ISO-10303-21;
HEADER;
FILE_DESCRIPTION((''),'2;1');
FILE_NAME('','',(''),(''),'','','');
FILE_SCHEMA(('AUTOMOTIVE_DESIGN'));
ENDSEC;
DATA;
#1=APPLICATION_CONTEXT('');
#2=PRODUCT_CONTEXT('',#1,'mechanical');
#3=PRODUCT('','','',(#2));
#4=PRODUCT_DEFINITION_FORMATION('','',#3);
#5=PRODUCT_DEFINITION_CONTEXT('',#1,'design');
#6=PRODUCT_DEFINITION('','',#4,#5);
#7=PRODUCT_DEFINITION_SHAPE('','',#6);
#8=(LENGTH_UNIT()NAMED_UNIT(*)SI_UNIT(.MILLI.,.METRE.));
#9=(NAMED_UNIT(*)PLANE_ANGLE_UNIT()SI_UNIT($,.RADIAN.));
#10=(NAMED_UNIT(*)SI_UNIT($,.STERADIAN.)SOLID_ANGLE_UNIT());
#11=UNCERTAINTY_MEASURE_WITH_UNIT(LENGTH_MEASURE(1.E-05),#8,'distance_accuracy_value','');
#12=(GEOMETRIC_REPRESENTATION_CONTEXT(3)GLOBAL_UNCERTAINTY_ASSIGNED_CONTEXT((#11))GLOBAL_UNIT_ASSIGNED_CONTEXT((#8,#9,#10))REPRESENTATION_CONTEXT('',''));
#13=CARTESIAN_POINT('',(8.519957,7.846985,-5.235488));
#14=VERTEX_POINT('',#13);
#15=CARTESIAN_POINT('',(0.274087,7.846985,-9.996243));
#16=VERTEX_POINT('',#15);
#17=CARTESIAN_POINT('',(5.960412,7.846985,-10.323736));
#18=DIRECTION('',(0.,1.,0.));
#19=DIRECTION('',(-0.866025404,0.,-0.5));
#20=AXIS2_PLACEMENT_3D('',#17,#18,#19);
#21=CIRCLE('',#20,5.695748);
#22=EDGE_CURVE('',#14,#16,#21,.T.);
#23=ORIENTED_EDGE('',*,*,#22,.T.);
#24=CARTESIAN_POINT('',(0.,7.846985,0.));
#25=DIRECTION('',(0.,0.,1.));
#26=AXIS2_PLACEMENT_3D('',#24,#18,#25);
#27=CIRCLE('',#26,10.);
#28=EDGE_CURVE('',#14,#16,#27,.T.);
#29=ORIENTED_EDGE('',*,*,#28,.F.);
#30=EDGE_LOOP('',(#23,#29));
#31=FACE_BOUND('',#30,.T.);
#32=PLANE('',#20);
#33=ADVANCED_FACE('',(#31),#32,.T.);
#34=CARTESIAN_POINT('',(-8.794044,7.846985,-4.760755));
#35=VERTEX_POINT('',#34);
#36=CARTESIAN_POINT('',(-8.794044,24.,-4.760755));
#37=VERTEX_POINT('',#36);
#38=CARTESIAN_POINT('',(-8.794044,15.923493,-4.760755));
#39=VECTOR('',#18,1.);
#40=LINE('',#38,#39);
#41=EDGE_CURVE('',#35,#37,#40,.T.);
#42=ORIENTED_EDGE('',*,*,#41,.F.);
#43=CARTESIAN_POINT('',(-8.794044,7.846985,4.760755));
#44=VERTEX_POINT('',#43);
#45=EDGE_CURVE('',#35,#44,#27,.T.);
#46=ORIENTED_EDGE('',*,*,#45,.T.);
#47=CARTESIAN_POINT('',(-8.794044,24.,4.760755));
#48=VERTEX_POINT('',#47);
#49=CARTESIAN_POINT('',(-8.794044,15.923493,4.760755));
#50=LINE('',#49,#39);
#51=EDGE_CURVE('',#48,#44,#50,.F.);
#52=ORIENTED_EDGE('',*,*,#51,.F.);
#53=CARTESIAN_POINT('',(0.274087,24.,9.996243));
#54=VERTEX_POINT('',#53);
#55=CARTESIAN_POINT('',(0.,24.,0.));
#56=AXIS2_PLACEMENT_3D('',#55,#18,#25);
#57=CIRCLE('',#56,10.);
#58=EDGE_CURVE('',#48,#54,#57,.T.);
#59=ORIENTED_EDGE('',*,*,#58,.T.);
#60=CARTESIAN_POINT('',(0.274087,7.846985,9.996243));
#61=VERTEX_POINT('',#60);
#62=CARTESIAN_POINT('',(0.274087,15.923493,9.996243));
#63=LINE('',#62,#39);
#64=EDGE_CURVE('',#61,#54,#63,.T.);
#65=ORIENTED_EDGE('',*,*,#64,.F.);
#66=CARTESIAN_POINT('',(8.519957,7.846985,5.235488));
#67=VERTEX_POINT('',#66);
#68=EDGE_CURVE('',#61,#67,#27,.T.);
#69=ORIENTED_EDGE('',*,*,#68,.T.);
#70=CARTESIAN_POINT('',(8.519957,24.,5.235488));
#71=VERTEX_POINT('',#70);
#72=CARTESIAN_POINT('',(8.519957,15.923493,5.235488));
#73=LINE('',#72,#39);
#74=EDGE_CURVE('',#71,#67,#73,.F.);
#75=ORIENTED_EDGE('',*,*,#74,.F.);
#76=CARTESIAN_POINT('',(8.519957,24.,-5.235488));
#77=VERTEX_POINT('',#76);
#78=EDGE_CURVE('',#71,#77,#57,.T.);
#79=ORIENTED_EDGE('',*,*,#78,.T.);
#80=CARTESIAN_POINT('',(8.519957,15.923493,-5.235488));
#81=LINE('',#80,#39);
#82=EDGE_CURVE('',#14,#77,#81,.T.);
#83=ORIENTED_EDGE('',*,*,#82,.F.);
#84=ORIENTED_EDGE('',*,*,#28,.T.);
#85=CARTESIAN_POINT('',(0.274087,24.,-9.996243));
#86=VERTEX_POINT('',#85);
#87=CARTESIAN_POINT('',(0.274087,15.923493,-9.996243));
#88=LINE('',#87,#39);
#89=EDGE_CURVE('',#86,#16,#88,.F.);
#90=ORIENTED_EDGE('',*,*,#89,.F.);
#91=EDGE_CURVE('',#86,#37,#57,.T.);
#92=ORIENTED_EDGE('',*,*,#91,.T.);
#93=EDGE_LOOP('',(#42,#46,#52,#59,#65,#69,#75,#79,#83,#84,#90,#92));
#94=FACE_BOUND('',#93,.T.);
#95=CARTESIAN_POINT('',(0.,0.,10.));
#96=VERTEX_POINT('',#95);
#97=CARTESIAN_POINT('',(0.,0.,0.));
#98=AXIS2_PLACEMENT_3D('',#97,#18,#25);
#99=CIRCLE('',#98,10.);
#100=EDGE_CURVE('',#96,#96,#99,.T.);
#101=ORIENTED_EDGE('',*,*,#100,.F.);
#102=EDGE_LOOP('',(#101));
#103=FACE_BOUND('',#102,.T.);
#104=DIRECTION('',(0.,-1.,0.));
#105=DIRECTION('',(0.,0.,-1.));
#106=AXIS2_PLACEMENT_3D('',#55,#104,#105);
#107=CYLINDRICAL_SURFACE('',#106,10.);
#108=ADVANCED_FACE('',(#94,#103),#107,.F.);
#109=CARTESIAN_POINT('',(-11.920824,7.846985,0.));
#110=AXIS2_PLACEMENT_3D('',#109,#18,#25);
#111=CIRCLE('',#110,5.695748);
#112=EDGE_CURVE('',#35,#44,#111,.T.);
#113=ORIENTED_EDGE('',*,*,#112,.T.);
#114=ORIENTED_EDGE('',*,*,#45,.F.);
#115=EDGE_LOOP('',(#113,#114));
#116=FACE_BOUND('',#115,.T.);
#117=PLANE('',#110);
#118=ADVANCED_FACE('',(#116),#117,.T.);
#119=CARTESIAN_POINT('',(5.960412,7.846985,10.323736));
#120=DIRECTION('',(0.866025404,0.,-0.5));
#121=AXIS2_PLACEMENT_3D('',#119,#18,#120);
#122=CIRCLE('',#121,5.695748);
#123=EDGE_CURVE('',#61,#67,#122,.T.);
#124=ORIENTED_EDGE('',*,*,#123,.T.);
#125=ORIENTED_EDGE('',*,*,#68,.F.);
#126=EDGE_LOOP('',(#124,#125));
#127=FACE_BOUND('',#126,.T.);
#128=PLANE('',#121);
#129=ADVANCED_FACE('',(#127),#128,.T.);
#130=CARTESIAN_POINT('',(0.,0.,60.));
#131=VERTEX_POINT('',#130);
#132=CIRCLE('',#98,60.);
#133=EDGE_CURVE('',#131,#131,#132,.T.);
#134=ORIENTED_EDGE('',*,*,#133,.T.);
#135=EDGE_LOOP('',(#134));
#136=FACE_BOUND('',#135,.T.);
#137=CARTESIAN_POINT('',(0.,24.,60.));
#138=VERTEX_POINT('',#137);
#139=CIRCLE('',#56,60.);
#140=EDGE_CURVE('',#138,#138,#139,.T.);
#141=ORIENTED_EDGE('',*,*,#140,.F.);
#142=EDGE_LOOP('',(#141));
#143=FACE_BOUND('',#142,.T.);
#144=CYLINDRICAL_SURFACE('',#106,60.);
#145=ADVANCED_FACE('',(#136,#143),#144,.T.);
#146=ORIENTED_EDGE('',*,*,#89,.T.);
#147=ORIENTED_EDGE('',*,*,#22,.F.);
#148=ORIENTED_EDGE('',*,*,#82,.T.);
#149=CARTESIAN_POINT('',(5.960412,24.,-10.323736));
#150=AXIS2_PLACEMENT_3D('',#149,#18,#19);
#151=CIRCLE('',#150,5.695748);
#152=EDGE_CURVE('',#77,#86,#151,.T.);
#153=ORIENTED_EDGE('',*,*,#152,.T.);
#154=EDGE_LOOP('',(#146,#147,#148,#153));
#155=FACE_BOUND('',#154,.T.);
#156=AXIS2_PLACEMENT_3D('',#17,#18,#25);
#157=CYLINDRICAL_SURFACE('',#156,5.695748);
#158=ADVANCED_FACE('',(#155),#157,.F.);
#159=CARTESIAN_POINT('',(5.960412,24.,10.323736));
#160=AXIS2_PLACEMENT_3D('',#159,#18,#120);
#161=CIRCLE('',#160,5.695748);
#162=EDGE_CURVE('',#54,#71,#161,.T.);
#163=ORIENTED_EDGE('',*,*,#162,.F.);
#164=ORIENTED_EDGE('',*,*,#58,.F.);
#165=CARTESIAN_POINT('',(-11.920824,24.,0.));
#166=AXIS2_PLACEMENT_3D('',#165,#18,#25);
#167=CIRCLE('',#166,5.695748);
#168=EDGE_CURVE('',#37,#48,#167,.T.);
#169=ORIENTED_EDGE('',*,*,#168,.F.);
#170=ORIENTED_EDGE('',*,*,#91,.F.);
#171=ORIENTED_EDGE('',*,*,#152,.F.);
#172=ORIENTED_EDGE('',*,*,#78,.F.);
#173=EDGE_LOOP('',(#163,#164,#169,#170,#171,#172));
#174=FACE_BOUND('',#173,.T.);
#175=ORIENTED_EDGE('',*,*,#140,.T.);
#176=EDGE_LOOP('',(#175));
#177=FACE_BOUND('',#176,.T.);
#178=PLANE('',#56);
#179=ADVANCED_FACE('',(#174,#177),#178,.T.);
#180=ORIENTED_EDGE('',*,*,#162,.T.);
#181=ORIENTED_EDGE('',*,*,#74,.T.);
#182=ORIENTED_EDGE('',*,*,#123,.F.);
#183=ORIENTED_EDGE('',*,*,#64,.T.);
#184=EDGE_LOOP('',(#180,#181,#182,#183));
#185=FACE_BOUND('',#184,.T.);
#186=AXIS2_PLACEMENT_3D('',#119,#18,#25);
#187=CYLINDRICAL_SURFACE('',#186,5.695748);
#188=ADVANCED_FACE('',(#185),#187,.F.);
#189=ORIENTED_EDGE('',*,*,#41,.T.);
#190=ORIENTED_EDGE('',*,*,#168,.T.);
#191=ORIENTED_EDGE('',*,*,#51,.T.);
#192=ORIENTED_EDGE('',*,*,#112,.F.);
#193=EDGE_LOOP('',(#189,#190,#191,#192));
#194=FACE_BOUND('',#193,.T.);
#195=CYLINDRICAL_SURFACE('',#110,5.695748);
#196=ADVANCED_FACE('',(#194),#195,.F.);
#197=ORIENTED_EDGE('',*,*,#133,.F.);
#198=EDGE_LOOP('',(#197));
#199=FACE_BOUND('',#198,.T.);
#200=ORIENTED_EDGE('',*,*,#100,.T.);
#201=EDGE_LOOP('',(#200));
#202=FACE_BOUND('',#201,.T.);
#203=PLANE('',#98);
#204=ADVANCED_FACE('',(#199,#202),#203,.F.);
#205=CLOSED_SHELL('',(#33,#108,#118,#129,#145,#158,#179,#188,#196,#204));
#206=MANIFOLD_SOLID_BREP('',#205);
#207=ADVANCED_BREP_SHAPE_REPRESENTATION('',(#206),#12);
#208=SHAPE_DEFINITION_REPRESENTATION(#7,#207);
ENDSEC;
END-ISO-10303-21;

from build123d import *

# Parameters (mm, degrees)
SKETCH1_R           = 60
BOSS_EXTRUDE1_DEPTH = 24
SKETCH2_R           = 10
CUT_EXTRUDE1_DEPTH  = 89.18163074
SKETCH3_R           = 5.695747902
CUT_EXTRUDE2_DEPTH  = 16.15301458
CIRPATTERN1_COUNT   = 3


with BuildPart() as part:
    # Sketch1 → Boss-Extrude1 (new body)
    with BuildSketch(Plane(origin=(0, 0, 0), x_dir=(1, 0, 0), z_dir=(0, 1, 0))):
        Circle(SKETCH1_R)
    extrude(amount=BOSS_EXTRUDE1_DEPTH)

    # Sketch2 → Cut-Extrude1 (cut, through all)
    with BuildSketch(Plane(origin=(0, 0, 0), x_dir=(1, 0, 0), z_dir=(0, 1, 0))):
        Circle(SKETCH2_R)
    extrude(amount=CUT_EXTRUDE1_DEPTH, mode=Mode.SUBTRACT)

    # Sketch3 → Cut-Extrude2 (cut)
    with BuildSketch(Plane(origin=(0, 24, 0), x_dir=(1, 0, 0), z_dir=(0, 1, 0))):
        with Locations((-11.920823607, 0)):
            Circle(SKETCH3_R)
    cut_extrude2 = extrude(amount=-CUT_EXTRUDE2_DEPTH, mode=Mode.SUBTRACT)

    # CirPattern1: Cut-Extrude2 ×3 about axis
    cirpattern1_axis = Axis((0, 0, 0), (0, 1, 0))
    for i in range(1, CIRPATTERN1_COUNT):
        add(cut_extrude2.rotate(cirpattern1_axis, i * 360 / CIRPATTERN1_COUNT), mode=Mode.SUBTRACT)


solid = part.part
